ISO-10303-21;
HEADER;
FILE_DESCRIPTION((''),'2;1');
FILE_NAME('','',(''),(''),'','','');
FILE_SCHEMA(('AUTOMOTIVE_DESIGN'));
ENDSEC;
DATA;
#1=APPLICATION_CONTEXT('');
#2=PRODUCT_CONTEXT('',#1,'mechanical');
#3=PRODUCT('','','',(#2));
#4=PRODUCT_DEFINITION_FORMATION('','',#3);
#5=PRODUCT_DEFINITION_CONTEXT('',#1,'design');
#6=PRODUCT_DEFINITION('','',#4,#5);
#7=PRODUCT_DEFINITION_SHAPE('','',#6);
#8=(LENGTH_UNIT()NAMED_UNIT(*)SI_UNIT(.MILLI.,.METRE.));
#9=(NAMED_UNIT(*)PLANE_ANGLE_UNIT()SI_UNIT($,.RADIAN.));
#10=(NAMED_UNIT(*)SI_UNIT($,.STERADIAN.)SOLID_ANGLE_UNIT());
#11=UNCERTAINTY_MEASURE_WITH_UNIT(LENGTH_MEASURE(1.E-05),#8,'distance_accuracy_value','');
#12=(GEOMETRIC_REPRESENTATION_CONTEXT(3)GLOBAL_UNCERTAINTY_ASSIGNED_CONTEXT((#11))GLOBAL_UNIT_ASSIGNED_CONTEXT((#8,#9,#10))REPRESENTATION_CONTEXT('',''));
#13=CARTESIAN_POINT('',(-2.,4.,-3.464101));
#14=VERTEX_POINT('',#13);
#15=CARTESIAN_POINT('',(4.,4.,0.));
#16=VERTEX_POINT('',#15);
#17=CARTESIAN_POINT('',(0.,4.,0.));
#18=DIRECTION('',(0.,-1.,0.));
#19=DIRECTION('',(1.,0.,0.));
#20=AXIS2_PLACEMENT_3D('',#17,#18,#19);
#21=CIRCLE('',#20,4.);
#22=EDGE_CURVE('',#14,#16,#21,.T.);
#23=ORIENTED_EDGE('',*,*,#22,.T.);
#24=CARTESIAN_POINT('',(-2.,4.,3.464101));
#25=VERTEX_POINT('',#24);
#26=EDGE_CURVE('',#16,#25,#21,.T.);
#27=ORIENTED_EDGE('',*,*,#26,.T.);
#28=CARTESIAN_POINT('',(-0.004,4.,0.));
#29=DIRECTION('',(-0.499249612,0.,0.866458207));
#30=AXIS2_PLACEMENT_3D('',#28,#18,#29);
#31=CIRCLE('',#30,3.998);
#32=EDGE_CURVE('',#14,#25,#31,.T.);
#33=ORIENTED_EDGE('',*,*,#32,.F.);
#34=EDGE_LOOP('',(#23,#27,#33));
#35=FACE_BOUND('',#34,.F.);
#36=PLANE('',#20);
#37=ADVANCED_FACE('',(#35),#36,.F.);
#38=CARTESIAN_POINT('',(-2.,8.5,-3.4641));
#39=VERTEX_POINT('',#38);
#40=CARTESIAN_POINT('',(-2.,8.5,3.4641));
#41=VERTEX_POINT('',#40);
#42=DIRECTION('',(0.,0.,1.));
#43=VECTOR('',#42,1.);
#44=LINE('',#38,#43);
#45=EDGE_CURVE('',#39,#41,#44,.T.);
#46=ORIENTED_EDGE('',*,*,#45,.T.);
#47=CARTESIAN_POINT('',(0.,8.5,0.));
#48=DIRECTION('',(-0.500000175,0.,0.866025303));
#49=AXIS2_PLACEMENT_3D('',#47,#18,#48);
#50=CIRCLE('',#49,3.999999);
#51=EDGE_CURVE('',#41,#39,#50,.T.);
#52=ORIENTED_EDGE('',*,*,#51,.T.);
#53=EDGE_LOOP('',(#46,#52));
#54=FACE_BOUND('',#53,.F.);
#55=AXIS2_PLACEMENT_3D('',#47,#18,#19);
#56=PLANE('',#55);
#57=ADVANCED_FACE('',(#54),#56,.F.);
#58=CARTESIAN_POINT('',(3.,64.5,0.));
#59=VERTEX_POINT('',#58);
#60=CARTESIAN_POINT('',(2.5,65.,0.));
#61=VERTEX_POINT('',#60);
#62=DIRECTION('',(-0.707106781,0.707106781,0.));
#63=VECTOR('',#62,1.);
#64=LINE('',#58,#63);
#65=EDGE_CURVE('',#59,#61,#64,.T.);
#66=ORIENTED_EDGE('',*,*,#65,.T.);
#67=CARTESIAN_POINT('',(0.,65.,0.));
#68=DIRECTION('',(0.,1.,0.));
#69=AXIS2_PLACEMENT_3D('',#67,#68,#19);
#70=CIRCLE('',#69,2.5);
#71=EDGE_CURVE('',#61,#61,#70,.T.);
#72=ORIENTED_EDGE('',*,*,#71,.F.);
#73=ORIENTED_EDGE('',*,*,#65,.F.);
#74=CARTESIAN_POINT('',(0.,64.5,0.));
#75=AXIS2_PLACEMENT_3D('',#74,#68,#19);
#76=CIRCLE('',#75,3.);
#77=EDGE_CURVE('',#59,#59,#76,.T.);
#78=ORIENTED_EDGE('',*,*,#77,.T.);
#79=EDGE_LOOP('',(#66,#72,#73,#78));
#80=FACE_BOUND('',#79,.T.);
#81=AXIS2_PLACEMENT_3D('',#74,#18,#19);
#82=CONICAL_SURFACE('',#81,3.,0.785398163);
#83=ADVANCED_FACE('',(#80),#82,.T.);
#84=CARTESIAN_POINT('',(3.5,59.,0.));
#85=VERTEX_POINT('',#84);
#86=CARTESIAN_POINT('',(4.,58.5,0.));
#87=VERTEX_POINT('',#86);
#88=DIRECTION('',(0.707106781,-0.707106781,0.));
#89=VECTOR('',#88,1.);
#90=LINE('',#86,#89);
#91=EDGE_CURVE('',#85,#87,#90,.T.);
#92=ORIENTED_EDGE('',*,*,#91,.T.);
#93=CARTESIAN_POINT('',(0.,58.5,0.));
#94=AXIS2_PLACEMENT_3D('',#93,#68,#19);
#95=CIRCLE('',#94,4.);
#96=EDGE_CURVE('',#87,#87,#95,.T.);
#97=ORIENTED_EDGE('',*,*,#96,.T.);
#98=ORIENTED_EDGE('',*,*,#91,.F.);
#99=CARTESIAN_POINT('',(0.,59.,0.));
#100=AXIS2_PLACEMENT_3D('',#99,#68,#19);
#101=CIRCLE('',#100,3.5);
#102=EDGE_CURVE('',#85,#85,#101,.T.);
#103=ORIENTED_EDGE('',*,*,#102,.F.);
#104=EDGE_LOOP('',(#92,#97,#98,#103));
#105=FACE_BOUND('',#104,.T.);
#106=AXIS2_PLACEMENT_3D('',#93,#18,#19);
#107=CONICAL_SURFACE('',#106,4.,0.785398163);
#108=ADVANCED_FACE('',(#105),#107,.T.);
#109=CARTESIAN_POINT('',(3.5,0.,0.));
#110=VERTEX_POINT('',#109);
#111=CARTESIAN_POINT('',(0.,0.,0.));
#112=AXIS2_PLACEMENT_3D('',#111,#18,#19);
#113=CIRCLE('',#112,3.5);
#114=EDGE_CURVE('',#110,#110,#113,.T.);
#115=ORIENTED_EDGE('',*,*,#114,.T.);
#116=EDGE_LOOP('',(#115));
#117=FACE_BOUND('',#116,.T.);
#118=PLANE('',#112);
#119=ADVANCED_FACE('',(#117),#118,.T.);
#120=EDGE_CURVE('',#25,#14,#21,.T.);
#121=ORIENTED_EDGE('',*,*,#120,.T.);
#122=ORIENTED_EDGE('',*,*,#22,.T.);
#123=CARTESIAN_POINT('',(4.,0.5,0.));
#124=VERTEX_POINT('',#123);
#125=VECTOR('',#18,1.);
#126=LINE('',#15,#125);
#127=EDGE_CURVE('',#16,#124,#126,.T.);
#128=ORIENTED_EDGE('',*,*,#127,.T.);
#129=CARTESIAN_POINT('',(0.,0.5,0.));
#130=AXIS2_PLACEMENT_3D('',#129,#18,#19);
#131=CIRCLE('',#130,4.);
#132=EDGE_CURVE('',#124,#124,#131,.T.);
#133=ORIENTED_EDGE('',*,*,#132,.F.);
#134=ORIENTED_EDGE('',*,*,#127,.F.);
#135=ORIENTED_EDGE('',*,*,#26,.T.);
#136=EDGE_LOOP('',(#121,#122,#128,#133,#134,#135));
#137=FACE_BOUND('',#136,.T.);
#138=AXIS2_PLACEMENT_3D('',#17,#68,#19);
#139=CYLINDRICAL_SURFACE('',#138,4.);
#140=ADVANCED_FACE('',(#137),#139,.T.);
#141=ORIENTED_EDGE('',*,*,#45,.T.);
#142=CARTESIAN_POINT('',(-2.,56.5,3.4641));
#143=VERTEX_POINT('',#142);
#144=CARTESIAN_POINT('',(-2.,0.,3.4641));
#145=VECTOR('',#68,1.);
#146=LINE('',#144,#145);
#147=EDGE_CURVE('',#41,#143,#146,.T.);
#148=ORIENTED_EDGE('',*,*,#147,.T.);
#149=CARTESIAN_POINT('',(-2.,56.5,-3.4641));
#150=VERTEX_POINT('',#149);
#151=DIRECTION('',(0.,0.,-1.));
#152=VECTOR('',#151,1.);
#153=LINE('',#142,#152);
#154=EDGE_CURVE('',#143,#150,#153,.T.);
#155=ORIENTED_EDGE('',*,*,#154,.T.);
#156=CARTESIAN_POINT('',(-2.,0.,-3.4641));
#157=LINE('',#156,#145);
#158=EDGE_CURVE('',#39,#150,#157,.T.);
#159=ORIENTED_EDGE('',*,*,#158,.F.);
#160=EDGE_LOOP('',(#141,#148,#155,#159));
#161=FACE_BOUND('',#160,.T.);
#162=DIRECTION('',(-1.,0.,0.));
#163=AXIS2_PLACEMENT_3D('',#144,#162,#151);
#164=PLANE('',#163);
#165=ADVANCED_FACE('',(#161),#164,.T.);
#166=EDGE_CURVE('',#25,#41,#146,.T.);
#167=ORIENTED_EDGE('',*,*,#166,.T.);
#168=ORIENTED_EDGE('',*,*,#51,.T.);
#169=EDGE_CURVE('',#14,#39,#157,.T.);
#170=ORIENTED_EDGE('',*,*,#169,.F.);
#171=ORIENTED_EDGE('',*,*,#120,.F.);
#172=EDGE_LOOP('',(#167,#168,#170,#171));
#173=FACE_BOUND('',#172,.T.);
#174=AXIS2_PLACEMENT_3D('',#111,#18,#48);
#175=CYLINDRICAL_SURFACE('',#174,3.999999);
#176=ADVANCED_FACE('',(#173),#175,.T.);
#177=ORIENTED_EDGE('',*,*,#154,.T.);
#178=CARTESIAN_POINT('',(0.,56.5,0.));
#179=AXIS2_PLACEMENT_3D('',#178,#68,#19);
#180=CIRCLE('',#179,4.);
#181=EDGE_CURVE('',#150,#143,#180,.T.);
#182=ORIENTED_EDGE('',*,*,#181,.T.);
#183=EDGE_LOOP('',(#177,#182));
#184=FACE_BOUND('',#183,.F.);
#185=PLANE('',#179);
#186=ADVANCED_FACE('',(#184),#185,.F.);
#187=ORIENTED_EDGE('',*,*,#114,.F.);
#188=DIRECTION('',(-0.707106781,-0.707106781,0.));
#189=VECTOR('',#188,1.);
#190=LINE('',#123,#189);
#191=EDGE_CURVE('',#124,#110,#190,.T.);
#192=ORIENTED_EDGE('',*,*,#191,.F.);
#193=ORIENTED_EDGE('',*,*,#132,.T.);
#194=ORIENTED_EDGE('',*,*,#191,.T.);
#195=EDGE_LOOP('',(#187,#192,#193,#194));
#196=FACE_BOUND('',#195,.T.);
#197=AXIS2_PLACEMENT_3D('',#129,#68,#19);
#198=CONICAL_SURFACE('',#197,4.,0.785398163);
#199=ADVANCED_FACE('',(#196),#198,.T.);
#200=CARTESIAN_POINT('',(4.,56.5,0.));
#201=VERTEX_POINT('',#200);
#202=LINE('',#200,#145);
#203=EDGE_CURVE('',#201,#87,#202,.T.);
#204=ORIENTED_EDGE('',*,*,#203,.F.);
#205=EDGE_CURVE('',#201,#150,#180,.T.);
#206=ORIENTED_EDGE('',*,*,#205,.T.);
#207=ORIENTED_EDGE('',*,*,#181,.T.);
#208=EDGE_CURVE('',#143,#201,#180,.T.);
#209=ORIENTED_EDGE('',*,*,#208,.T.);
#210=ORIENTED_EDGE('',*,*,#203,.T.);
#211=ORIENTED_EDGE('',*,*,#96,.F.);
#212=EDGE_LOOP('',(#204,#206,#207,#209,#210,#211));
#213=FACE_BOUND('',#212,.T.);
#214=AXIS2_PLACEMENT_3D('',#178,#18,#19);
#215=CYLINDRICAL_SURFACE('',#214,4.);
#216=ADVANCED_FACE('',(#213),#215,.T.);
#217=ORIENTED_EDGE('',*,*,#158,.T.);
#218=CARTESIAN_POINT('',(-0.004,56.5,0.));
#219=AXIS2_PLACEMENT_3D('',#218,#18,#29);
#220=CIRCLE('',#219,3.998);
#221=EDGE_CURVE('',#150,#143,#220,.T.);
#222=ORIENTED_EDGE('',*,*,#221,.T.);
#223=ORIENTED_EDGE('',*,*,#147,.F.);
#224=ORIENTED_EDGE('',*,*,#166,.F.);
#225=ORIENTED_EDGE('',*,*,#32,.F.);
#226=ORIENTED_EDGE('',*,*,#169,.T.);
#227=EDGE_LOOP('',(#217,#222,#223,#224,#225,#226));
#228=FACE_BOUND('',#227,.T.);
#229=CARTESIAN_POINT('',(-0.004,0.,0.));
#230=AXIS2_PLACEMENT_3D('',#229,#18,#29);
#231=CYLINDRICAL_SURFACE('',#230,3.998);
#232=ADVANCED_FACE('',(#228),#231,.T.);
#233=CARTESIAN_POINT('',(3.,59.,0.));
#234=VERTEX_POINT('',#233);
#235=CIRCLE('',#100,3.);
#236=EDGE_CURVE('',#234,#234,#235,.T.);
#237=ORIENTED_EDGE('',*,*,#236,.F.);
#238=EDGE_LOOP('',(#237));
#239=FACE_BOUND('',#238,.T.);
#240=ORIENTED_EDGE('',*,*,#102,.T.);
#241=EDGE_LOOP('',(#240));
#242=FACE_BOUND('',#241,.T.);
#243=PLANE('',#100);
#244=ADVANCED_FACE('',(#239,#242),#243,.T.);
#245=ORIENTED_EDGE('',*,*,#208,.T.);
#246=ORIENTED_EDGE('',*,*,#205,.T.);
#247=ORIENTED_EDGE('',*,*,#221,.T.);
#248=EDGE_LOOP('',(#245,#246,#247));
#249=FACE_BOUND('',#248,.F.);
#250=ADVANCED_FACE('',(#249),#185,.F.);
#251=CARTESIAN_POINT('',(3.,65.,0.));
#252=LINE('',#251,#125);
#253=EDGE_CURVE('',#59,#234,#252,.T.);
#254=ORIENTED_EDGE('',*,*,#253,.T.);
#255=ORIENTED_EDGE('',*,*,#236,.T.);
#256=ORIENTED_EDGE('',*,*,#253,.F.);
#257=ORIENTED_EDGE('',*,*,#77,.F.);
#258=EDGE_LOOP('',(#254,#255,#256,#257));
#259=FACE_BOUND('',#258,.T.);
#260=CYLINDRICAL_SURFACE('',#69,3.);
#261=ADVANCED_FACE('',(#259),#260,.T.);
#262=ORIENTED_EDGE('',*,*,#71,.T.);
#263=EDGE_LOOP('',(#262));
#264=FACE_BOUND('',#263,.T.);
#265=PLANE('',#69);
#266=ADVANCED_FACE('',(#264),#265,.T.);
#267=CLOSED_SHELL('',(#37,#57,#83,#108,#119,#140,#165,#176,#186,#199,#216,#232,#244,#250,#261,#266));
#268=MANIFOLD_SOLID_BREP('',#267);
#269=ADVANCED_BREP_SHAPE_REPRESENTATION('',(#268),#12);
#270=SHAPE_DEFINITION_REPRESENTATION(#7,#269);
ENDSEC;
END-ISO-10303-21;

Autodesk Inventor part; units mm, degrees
ref_plane "YZ Plane" through (0, 0, 0) normal (1, 0, 0) x (0, 1, 0)
ref_plane "XZ Plane" through (0, 0, 0) normal (0, 1, 0) x (-1, 0, 0)
ref_plane "XY Plane" through (0, 0, 0) normal (0, 0, 1) x (1, 0, 0)
sketch "Sketch1" plane through (0, 0, 0) normal (0, 1, 0) x (-1, 0, 0)
  line L0 (-4, 0) -> (2, 0)
  line L1 (2, 3.4641) -> (2, -3.4641)
  arc A0 (2, 3.4641) -> (2, -3.4641) centre (0.004, 0) ccw
  point P0 (0, 0)
  dimension "d1" = 6
extrude "Extrusion1" add sketch "Sketch1" along normal blind 65
sketch "Sketch2" plane through (0, 65, 0) normal (0, 1, 0) x (1, 0, 0)
  line L0 (-2, -3.4641) -> (-2, 3.4641)
  line L1 (-2, 3.4641) -> (-2, -3.4641) projected
  arc A0 (-2, 3.4641) -> (-2, -3.4641) centre (0, 0) ccw
extrude "Extrusion2" add sketch "Sketch2" against normal blind 8.5
sketch "Sketch3" plane through (0, 0, 0) normal (0, -1, 0) x (1, 0, 0)
  line L0 (-2, -3.4641) -> (-2, 3.4641)
  arc A0 (-2, 3.4641) -> (-2, -3.4641) centre (0, 0) ccw
  point P0 (0, 0)
extrude "Extrusion3" add sketch "Sketch3" against normal blind 8.5
sketch "Sketch4" plane through (0, 65, 0) normal (0, 1, 0) x (1, 0, 0)
  circle A0 centre (0, 0) radius 4
  dimension "d9" = 8
extrude "Extrusion4" cut sketch "Sketch4" against normal blind 8.5
sketch "Sketch5" plane through (0, 56.5, 0) normal (0, 1, 0) x (1, 0, 0)
  circle A0 centre (0, 0) radius 4
  dimension "d12" = 8
extrude "Extrusion5" add sketch "Sketch5" along normal blind 8.5
sketch "Sketch6" plane through (0, 65, 0) normal (0, 1, 0) x (1, 0, 0)
  circle A0 centre (0, 0) radius 3
  circle A1 centre (0, 0) radius 4
  dimension "d15" = 6
  dimension "d16" = 8
extrude "Extrusion6" cut sketch "Sketch6" against normal blind 6
thread "Thread1" size "M6x1" class "6g" standard "ANSI Metric M Profile" full length
chamfer "Chamfer1" distance 0.5 angle 45 1 edges at (-3, 65, 0)
chamfer "Chamfer2" distance 0.5 angle 45 1 edges at (-4, 59, 0)
sketch "Sketch7" plane through (0, 0, 0) normal (0, -1, 0) x (1, 0, 0)
  circle A0 centre (0, 0) radius 4
  dimension "d27" = 8
extrude "Extrusion7" cut sketch "Sketch7" against normal blind 4
sketch "Sketch8" plane through (0, 4, 0) normal (0, -1, 0) x (1, 0, 0)
  circle A0 centre (0, 0) radius 4
  dimension "d30" = 8
extrude "Extrusion8" add sketch "Sketch8" along normal blind 4
chamfer "Chamfer3" distance 0.5 angle 45 1 edges at (-4, 0, 0)
properties part number "hridel_senzor"
